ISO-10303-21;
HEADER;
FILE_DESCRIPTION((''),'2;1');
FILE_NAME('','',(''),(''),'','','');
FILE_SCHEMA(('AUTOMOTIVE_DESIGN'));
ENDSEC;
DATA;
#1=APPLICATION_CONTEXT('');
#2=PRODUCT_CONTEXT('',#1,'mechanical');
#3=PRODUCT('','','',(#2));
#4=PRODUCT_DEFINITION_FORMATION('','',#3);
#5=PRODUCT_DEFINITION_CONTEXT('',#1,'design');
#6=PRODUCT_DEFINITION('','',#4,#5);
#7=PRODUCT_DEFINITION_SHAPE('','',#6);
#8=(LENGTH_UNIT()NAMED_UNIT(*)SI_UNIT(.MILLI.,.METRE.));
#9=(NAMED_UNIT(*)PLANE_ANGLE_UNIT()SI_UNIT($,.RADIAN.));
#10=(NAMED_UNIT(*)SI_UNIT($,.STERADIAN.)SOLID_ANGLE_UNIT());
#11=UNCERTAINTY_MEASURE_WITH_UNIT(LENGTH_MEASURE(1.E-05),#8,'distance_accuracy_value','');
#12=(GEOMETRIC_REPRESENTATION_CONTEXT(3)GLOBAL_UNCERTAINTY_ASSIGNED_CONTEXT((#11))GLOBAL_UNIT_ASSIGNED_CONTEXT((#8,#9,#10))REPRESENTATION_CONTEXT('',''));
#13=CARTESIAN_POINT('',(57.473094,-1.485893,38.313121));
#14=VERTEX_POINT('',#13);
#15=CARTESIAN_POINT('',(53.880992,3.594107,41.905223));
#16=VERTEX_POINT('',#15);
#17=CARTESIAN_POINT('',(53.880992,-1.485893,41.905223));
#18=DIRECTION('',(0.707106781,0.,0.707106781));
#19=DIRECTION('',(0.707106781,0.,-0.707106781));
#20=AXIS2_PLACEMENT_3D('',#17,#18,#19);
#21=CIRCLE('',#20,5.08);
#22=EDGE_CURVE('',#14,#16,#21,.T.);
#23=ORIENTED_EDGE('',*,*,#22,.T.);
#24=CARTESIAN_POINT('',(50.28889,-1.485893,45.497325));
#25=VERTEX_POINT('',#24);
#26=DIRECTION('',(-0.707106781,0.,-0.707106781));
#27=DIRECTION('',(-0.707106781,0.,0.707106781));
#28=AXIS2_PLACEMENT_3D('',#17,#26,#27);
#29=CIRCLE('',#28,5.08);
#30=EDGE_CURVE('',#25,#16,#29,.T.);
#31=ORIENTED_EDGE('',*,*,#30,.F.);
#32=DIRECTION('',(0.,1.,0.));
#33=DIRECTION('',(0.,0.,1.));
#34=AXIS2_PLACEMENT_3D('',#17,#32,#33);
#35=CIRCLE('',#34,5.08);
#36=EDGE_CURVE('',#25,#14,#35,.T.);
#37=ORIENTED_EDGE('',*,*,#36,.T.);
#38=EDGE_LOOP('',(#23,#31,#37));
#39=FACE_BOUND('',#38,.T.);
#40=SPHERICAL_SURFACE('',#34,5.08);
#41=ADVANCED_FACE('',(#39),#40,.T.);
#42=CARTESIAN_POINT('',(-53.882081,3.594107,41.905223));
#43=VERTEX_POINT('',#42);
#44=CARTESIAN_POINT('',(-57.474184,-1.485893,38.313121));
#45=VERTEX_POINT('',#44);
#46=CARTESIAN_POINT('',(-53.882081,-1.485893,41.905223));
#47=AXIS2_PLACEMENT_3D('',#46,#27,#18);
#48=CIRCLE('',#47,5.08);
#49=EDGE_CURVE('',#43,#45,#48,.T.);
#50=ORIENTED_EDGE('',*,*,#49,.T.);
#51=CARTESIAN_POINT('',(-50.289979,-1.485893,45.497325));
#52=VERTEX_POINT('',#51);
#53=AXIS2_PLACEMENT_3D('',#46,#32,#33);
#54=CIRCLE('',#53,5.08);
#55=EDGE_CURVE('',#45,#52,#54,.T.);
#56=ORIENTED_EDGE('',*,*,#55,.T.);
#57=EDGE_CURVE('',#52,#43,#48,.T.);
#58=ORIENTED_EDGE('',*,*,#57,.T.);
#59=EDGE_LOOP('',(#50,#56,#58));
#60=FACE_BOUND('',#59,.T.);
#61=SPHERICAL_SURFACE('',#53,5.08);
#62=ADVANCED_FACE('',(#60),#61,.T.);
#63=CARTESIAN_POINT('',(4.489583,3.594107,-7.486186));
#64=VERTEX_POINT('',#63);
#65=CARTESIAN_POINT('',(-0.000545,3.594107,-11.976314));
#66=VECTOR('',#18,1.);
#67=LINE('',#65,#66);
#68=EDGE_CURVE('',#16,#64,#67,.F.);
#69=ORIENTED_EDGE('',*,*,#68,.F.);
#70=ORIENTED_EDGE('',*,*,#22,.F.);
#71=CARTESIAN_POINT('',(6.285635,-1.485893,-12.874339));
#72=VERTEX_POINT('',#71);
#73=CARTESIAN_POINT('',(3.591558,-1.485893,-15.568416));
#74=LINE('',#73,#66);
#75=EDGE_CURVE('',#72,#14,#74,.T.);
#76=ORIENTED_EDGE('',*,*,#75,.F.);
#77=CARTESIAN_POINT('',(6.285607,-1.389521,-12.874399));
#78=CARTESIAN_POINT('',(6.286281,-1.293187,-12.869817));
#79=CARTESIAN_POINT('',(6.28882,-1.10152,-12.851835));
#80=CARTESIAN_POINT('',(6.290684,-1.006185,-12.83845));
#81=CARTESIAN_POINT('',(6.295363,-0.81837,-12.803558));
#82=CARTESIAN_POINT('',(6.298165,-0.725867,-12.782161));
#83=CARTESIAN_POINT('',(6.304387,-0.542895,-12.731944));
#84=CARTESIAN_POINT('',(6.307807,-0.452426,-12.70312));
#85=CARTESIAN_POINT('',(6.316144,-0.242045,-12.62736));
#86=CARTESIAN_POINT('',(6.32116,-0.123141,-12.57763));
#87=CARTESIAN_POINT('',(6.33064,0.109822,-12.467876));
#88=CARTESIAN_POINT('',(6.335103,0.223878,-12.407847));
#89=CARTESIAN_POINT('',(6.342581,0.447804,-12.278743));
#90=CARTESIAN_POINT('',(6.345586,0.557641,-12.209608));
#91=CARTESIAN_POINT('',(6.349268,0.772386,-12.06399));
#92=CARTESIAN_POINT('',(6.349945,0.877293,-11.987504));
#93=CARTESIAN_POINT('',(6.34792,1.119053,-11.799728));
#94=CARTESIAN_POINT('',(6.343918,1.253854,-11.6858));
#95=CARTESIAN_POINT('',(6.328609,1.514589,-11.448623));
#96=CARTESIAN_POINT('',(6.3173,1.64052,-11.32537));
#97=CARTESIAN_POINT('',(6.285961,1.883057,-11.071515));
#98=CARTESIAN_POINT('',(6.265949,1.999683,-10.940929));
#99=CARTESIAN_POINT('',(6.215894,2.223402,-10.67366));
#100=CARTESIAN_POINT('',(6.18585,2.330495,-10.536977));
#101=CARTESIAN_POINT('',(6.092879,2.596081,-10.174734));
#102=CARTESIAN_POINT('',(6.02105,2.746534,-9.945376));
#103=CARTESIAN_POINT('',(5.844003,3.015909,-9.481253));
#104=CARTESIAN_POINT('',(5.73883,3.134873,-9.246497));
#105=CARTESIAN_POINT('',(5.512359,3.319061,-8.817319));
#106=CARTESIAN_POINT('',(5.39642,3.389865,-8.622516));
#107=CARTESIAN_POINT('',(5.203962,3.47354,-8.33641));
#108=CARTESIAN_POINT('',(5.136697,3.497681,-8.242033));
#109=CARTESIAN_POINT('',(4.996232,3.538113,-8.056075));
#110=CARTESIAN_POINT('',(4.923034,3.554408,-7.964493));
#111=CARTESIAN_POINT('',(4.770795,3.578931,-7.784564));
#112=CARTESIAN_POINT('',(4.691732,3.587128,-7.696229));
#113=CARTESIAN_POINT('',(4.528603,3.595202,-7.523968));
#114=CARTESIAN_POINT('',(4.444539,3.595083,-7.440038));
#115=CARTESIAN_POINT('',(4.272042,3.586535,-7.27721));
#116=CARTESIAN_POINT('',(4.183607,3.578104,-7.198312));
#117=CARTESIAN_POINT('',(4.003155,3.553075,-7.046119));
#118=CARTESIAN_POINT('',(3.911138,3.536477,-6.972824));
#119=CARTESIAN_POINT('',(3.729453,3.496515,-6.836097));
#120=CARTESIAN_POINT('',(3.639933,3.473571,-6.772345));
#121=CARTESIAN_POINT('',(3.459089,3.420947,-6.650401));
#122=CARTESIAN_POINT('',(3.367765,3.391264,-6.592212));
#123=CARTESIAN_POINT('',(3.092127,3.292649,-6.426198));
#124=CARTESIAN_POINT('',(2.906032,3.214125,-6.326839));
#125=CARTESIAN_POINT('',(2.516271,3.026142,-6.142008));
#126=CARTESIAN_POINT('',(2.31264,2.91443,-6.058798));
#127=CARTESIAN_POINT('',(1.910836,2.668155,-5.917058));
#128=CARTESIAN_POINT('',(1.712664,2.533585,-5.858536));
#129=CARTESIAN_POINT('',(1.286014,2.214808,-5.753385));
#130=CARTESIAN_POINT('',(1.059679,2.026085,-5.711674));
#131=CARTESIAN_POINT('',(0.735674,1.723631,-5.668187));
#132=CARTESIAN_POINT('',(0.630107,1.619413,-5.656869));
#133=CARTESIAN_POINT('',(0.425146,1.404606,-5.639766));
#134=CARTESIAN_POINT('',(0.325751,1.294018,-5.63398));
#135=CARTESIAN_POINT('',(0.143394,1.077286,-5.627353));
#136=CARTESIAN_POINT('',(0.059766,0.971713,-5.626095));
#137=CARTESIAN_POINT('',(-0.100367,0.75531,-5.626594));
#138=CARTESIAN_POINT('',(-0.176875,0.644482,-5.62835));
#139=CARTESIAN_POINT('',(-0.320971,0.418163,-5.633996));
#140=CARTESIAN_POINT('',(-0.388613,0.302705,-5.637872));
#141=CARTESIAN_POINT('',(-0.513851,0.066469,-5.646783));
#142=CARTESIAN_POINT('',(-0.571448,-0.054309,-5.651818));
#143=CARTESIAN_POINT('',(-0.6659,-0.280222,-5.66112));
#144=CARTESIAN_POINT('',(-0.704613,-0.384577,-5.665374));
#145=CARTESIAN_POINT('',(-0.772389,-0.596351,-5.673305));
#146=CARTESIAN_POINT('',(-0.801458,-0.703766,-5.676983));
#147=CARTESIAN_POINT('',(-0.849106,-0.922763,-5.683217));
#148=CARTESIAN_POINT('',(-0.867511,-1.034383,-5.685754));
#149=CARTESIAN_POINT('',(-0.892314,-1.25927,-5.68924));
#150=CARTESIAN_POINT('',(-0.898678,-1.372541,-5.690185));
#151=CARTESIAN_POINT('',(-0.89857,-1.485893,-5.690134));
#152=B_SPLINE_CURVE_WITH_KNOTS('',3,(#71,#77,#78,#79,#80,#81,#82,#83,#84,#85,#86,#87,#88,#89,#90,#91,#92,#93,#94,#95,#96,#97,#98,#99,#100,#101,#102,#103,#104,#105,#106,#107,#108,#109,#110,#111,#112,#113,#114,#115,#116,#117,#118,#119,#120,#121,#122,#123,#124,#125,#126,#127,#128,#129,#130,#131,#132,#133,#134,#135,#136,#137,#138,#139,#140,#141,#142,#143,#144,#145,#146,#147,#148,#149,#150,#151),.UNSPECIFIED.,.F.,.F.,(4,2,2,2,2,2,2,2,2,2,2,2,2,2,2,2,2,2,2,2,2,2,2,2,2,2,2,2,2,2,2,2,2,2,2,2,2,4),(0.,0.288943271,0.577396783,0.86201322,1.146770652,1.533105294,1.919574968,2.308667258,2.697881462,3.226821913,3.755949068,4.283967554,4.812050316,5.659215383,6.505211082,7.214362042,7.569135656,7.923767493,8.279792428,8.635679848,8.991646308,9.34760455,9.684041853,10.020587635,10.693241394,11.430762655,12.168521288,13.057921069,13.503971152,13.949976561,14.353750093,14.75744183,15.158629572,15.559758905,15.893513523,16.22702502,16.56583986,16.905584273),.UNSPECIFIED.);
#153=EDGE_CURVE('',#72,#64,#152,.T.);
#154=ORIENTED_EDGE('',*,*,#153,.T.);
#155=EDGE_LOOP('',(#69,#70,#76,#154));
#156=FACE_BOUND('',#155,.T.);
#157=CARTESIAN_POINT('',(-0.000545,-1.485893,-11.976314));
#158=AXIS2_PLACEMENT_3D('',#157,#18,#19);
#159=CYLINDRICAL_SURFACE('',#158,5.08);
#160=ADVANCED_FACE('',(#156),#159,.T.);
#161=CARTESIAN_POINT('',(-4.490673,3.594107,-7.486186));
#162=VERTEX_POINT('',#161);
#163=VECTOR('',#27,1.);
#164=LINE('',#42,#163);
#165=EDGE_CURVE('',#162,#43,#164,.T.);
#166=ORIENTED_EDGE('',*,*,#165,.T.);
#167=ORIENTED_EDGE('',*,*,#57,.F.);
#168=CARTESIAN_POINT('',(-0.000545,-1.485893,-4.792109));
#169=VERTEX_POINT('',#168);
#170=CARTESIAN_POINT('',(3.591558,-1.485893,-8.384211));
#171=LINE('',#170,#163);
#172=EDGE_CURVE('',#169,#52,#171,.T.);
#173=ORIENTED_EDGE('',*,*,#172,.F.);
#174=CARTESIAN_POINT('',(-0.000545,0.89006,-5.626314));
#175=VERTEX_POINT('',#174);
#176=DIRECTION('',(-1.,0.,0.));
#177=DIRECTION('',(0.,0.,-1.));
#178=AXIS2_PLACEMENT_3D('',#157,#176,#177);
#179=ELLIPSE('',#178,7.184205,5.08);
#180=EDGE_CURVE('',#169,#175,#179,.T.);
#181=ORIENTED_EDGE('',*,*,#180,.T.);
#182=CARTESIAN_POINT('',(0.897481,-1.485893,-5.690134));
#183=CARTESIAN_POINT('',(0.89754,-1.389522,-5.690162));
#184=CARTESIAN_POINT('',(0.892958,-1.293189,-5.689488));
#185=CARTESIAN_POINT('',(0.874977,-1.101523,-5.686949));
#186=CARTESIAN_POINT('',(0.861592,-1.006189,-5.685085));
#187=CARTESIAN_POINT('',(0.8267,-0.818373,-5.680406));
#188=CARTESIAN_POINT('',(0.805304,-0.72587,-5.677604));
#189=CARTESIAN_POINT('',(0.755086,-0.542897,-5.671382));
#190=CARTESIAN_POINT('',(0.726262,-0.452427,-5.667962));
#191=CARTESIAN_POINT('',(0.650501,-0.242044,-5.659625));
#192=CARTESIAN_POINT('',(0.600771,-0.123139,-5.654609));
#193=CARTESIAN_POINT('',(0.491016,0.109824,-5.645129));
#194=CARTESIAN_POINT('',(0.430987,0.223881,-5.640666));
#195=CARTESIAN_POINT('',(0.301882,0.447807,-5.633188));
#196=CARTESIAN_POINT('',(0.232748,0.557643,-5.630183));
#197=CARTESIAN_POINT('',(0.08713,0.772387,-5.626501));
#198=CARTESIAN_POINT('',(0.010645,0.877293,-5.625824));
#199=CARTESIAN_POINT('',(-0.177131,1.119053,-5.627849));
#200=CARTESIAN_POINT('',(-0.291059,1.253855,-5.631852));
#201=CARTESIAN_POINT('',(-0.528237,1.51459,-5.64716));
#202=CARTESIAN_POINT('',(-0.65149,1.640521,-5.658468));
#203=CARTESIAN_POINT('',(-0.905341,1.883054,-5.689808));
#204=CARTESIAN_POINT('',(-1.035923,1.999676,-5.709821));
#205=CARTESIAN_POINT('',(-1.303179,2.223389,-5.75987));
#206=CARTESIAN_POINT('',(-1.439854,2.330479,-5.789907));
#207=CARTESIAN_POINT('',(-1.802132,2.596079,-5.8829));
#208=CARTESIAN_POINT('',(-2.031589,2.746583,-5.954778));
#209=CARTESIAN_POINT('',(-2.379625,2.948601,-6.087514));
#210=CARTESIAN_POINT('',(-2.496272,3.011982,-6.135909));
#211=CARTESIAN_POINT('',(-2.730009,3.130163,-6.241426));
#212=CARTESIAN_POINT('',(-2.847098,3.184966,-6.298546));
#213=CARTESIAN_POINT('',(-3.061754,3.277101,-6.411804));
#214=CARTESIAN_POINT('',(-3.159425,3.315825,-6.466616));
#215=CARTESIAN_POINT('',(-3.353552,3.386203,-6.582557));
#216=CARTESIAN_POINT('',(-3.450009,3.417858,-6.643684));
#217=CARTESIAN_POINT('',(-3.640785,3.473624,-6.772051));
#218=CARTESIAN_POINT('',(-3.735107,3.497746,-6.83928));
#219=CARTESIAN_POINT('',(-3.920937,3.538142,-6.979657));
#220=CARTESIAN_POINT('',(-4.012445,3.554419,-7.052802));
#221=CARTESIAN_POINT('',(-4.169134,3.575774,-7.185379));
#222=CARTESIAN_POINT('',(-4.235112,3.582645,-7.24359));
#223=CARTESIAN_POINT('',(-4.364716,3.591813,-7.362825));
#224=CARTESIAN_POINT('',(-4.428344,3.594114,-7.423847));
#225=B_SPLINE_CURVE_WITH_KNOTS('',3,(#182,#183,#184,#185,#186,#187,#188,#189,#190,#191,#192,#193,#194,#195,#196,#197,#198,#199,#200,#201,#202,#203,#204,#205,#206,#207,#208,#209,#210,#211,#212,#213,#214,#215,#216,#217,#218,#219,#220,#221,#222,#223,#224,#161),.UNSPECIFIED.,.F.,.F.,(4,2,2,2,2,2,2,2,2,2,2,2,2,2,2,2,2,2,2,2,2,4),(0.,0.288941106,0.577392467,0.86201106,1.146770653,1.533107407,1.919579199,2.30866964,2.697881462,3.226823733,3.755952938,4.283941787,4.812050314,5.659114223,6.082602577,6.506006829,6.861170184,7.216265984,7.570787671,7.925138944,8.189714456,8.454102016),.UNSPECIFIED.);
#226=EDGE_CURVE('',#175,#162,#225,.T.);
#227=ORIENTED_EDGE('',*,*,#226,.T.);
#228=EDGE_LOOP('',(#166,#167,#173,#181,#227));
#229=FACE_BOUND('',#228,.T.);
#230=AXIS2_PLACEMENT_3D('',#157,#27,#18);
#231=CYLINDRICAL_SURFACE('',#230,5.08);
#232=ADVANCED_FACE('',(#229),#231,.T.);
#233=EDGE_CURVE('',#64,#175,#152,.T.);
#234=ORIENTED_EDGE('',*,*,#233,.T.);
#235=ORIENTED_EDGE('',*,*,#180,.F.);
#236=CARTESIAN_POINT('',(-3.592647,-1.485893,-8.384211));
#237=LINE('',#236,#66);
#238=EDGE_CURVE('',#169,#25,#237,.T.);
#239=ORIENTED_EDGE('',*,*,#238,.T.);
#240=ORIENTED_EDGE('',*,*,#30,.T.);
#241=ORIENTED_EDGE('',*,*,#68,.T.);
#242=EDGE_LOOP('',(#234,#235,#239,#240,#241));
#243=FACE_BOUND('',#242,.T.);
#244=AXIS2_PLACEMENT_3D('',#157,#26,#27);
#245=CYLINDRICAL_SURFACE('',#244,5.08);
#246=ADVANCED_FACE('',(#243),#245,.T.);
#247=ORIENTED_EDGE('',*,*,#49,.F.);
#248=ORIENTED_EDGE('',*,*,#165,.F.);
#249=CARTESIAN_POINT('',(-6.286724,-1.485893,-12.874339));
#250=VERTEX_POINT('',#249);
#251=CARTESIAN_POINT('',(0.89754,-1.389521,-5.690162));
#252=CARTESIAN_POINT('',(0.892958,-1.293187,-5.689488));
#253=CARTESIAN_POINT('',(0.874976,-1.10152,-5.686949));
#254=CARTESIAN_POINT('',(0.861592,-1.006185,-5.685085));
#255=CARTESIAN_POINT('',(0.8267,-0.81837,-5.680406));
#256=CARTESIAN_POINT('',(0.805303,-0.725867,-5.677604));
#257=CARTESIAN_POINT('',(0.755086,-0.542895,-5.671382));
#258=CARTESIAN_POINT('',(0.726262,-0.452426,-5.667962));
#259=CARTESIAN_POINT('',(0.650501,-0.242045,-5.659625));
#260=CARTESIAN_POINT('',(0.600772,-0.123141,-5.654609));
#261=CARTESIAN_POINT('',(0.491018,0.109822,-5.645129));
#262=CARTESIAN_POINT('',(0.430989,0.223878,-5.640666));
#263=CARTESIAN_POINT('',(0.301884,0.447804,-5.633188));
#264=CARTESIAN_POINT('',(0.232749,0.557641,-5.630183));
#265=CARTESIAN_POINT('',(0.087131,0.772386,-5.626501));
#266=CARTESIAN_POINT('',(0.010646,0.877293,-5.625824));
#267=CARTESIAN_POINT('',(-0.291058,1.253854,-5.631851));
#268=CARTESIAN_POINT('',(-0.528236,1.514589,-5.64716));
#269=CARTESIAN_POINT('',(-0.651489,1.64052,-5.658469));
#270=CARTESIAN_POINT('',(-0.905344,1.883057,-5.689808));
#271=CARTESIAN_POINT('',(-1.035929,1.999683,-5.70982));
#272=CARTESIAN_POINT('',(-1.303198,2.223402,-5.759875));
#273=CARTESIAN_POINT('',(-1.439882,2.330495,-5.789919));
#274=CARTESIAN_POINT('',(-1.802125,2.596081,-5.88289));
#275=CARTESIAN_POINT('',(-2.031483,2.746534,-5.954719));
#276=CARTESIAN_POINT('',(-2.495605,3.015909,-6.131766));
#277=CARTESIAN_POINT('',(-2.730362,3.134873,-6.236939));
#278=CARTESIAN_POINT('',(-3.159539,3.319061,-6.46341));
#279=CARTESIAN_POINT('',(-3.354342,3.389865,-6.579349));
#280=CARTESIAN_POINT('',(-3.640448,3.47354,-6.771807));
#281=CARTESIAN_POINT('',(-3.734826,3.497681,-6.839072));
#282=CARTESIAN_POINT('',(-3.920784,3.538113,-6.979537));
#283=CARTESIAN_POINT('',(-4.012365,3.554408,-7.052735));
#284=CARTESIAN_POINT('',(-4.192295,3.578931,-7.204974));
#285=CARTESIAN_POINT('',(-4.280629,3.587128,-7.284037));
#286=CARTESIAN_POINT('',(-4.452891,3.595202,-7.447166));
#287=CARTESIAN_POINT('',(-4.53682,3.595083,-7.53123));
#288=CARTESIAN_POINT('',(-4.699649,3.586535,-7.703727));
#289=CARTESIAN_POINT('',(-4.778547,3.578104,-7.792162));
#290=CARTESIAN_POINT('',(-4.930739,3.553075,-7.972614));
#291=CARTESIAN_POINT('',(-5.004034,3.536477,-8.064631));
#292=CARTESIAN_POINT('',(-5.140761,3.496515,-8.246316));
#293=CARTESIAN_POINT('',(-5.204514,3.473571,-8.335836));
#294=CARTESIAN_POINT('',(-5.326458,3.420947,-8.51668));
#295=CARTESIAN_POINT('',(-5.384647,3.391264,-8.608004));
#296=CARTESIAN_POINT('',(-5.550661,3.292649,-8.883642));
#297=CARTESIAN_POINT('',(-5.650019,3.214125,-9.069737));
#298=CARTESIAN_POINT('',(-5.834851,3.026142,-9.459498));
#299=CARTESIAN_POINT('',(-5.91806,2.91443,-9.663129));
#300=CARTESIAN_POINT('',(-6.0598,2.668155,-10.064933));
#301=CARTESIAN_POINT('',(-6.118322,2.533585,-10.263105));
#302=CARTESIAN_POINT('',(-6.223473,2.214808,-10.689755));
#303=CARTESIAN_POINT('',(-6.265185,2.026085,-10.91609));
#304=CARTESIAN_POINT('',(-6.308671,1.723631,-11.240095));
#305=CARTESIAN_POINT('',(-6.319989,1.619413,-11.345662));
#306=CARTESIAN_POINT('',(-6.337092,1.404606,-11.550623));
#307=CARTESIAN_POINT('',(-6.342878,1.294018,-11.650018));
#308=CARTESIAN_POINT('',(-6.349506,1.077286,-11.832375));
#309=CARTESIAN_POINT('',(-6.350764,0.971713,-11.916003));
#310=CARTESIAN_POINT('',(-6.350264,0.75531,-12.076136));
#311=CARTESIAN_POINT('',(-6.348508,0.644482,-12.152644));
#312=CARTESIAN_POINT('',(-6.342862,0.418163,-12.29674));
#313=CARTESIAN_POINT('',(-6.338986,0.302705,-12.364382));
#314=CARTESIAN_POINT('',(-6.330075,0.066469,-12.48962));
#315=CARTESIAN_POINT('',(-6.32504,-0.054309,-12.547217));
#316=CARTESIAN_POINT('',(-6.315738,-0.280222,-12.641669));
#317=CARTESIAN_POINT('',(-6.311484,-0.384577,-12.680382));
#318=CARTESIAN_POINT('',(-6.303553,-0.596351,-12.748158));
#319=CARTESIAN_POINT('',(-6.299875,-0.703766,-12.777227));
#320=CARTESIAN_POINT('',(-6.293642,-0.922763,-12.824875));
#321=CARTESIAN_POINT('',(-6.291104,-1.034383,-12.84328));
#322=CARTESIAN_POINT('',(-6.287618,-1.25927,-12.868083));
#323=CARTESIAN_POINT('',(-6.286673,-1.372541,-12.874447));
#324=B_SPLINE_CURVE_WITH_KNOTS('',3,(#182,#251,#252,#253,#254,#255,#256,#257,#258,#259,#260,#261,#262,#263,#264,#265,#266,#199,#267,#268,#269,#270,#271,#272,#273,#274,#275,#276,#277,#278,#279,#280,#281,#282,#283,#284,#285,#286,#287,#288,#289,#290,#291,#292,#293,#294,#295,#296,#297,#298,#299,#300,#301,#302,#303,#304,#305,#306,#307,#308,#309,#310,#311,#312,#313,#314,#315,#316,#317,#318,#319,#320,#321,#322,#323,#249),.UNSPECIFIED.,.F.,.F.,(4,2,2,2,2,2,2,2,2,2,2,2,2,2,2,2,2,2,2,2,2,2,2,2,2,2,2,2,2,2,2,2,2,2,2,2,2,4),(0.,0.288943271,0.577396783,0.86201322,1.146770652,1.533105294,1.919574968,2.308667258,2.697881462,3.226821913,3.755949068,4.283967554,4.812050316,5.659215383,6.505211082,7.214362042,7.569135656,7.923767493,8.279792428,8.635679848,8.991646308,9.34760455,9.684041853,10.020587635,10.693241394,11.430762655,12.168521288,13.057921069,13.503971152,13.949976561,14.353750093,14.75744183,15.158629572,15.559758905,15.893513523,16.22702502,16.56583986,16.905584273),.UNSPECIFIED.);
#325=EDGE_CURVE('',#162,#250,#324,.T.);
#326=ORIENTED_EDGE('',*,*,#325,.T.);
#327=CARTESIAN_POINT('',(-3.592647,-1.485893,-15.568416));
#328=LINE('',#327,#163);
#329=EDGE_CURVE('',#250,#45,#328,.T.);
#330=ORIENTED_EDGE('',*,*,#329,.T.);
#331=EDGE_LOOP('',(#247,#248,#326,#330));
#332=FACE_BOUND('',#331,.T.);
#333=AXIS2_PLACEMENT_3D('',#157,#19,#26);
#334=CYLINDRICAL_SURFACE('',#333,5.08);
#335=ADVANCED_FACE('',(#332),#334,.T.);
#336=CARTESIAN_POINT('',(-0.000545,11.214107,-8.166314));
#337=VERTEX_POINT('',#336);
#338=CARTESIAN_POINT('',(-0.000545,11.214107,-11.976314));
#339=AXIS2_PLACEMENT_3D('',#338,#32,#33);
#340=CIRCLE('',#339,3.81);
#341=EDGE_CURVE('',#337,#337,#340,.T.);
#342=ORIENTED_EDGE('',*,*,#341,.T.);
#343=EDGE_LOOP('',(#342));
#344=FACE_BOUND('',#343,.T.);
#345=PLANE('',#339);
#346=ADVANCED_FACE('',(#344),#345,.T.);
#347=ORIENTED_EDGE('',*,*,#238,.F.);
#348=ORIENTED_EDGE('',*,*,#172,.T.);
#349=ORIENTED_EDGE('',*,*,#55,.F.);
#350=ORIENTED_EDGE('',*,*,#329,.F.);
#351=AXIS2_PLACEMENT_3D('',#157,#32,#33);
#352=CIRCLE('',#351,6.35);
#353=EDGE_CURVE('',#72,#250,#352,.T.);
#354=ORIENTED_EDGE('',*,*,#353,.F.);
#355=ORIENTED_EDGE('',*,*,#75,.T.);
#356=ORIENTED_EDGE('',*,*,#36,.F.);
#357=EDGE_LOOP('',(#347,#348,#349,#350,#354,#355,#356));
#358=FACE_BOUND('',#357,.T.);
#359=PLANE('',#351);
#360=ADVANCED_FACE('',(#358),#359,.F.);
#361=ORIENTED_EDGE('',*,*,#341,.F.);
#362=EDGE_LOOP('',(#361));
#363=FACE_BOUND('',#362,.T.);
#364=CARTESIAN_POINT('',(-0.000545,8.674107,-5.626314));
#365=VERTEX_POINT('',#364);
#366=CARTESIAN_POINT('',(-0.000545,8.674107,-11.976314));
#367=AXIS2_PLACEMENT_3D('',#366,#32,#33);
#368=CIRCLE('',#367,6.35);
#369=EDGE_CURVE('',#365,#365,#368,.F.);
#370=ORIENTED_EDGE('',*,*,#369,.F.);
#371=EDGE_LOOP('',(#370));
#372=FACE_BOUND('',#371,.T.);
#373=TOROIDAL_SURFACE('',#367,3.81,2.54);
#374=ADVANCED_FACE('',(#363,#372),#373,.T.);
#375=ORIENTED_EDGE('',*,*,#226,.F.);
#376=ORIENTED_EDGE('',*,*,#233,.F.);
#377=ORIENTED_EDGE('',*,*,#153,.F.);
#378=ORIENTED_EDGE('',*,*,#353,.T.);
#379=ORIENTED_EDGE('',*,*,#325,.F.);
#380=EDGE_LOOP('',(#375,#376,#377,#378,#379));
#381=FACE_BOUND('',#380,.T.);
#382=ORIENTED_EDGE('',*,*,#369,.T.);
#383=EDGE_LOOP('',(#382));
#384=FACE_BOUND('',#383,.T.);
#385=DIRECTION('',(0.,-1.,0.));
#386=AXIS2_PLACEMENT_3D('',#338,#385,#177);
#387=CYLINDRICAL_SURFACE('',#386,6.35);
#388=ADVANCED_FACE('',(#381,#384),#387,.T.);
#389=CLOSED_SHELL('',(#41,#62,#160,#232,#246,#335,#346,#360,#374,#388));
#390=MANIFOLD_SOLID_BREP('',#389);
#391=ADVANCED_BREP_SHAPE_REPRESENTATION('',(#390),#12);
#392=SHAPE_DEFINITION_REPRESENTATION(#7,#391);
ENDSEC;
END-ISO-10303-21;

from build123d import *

# Parameters (mm, degrees)
BOSS_EXTRUDE1_DEPTH = 2.54
FILLET4_R           = 2.54
SKETCH2_R           = 3.175
BOSS_EXTRUDE2_DEPTH = 6.35
FILLET5_R           = 1.27
SCALE1_SCALE        = 2


with BuildPart() as part:
    # Sketch1 → Boss-Extrude1 (new body)
    with BuildSketch(Plane(origin=(0, 0, 0), x_dir=(1, 0, 0), z_dir=(0, 1, 0))):
        with BuildLine():
            ThreePointArc((1.796051224, -1.796051224), (2.54, 0), (1.796051224, 1.796051224))
            ThreePointArc((1.796051224, 1.796051224), (0, 2.54), (-1.796051224, 1.796051224))
            ThreePointArc((-1.796051224, 1.796051224), (-2.54, 0), (-1.796051224, -1.796051224))
            Line((-1.796051224, -1.796051224), (0, -3.592102448))
            Line((0, -3.592102448), (1.796051224, -1.796051224))
        make_face()
        with BuildLine():
            Line((28.736819587, -25.144717139), (1.796051224, 1.796051224))
            ThreePointArc((1.796051224, 1.796051224), (2.54, 0), (1.796051224, -1.796051224))
            Line((1.796051224, -1.796051224), (0, -3.592102448))
            Line((0, -3.592102448), (25.144717139, -28.736819587))
            ThreePointArc((25.144717139, -28.736819587), (28.736819587, -28.736819587), (28.736819587, -25.144717139))
        make_face()
        with BuildLine():
            ThreePointArc((-1.796051224, -1.796051224), (-2.54, 0), (-1.796051224, 1.796051224))
            Line((-1.796051224, 1.796051224), (-28.736819587, -25.144717139))
            ThreePointArc((-28.736819587, -25.144717139), (-28.736819587, -28.736819587), (-25.144717139, -28.736819587))
            Line((-25.144717139, -28.736819587), (0, -3.592102448))
            Line((0, -3.592102448), (-1.796051224, -1.796051224))
        make_face()
    extrude(amount=BOSS_EXTRUDE1_DEPTH)

    # Fillet4
    fillet4_edges = [part.edges().sort_by_distance(p)[0] for p in [
        (-28.736819587, 2.54, 28.736819587),
        (-15.266435406, 2.54, 11.674332957),
        (0, 2.54, -2.54),
        (15.266435406, 2.54, 11.674332957),
        (28.736819587, 2.54, 28.736819587),
        (12.572358569, 2.54, 16.164461018),
        (-12.572358569, 2.54, 16.164461018),
    ]]
    fillet(fillet4_edges, radius=FILLET4_R - 0.0001)  # a hair under: the kernel refuses the full size

    # Sketch2 → Boss-Extrude2 (add)
    with BuildSketch(Plane(origin=(0, 0, 0), x_dir=(1, 0, 0), z_dir=(0, 1, 0))):
        with Locations(Location((0, 0, 0), (0, 0, 171.869897646))):
            Circle(SKETCH2_R)
    extrude(amount=BOSS_EXTRUDE2_DEPTH)

    # Fillet5
    fillet5_edges = [part.edges().sort_by_distance(p)[0] for p in [
        (3.143089642, 6.35, 0.449012806),
    ]]
    fillet(fillet5_edges, radius=FILLET5_R)


with BuildPart() as part_1:
    # Scale1: scaled about (-2.1e-08, 1.486347435, 11.976765816)
    add(part.part.scale(SCALE1_SCALE).moved(Location((2.1e-08, -1.486347435, -11.976765816))))


solid = part_1.part
